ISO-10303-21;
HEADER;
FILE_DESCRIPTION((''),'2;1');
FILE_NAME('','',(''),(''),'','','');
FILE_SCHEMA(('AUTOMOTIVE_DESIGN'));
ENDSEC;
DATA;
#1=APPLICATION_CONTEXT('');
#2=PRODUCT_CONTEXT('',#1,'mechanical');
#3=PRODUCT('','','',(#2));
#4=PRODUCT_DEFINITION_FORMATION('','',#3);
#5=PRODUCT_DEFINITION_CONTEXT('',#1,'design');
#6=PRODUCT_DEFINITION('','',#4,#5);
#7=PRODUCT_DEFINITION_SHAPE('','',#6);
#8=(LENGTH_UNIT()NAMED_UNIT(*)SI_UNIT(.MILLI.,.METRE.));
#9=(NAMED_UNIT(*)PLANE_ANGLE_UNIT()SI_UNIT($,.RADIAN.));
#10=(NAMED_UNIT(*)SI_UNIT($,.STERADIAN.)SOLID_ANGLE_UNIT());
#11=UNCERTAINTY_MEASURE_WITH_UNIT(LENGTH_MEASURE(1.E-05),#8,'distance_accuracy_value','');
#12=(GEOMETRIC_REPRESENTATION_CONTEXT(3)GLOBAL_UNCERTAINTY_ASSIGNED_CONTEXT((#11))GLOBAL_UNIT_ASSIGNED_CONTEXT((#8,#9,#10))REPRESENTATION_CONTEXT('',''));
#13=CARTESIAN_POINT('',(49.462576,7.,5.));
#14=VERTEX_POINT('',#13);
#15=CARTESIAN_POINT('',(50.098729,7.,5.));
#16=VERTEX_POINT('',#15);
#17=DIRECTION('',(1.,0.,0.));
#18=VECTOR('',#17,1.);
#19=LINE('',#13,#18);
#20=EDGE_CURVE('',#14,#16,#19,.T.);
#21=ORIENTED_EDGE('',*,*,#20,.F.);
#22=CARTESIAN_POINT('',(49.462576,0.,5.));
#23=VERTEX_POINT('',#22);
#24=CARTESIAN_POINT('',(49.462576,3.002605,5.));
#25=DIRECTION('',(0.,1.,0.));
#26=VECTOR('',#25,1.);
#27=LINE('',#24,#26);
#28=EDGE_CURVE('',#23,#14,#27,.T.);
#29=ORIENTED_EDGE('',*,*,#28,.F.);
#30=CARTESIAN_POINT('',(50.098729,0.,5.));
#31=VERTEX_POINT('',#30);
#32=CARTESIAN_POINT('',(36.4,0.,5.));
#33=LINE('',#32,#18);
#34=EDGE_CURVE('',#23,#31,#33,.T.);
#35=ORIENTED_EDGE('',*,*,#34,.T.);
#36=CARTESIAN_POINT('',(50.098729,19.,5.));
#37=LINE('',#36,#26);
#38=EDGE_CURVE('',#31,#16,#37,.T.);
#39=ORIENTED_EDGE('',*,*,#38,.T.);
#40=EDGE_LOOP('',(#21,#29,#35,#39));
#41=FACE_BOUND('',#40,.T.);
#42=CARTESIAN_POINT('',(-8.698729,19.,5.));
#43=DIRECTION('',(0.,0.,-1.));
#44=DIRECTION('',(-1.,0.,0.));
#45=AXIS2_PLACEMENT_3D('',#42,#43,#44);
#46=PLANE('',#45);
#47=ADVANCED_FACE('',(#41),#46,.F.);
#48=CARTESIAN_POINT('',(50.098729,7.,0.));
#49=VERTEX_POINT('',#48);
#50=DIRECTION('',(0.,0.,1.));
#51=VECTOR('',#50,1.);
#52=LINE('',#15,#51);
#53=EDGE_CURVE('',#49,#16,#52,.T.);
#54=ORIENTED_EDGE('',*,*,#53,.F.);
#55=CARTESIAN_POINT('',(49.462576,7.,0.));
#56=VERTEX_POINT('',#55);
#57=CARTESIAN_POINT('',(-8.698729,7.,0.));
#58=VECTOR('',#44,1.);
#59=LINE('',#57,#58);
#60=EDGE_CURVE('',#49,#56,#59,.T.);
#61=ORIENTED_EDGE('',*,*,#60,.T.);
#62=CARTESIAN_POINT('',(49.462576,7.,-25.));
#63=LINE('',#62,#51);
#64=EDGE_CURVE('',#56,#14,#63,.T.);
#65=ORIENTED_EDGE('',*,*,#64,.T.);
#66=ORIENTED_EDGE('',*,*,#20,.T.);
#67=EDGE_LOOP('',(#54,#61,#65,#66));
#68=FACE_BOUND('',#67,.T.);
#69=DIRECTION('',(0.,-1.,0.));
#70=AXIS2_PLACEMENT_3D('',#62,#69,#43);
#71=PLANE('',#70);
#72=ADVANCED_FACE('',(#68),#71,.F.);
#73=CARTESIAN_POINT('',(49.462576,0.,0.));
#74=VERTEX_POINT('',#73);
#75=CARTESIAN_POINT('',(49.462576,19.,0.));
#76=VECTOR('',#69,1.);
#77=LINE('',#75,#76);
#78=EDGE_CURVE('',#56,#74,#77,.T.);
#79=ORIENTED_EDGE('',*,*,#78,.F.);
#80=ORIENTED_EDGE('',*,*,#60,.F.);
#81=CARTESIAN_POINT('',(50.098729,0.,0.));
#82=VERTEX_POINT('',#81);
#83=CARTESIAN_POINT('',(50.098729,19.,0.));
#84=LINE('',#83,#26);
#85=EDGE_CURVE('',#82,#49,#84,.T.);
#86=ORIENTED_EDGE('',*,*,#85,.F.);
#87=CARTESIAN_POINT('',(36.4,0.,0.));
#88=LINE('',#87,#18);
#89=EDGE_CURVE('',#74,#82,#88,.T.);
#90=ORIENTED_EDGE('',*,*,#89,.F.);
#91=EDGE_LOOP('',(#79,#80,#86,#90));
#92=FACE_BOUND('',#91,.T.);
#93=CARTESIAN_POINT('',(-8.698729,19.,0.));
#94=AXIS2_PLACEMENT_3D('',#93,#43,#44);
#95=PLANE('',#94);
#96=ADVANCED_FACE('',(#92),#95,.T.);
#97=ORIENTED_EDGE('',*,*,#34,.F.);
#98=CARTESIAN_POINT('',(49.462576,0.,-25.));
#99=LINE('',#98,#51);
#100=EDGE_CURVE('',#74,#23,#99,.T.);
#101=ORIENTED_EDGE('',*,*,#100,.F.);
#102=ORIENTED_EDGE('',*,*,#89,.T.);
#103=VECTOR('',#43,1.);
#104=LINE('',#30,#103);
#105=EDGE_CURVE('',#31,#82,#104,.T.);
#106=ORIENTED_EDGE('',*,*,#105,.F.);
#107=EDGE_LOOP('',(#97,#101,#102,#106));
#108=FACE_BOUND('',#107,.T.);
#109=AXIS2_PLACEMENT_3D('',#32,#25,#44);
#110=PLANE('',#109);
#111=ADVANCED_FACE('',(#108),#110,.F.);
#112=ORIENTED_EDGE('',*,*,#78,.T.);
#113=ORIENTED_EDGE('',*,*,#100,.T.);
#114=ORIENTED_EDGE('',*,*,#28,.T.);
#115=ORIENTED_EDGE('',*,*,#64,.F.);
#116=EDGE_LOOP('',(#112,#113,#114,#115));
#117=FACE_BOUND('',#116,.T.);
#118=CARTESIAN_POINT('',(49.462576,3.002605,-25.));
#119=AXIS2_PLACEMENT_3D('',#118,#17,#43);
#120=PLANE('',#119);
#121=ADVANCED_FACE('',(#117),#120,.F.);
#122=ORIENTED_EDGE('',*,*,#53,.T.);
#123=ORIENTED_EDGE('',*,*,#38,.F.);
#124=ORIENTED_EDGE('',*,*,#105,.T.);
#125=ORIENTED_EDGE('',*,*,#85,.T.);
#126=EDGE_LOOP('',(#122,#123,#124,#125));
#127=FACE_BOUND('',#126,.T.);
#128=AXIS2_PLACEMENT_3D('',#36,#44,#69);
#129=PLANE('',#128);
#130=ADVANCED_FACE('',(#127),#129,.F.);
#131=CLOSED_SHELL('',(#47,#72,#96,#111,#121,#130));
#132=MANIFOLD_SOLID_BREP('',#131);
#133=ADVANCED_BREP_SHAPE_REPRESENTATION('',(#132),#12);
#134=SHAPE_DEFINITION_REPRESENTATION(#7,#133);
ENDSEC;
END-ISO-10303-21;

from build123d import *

# Parameters (mm, degrees)
BOSS_EXTRU_1_DEPTH               = 5
ENL_V_MAT_EXTRU_2_DEPTH          = 30
R_P_TITION_START                 = -13.698729417
R_P_TITION_LIN_AIRE1_OUTLINE_W   = 17
R_P_TITION_LIN_AIRE1_OUTLINE_H   = 5
R_P_TITION_LIN_AIRE1_DEPTH       = 167.693647085
R_P_TITION_START_2               = 86.498729417
R_P_TITION_LIN_AIRE1_2_OUTLINE_W = 7
R_P_TITION_LIN_AIRE1_2_OUTLINE_H = 5
R_P_TITION_LIN_AIRE1_2_DEPTH     = 67.496188251
R_P_TITION_LIN_AIRE1_3_OUTLINE_W = 7
R_P_TITION_LIN_AIRE1_3_OUTLINE_H = 5
R_P_TITION_LIN_AIRE1_3_DEPTH     = 63.161305733


# Read off the part's stored shape, not the designer's step: Répétition linéaire1
with BuildPart() as part:
    # Esquisse1 → Boss.-Extru.1 (new body)
    with BuildSketch(Plane.XY):
        with BuildLine():
            Line((-13.698729417, 0), (0, 0))
            Line((0, 0), (0, 19))
            Line((0, 19), (36.4, 19))
            Line((36.4, 19), (36.4, 0))
            Line((36.4, 0), (50.098729417, 0))
            Line((50.098729417, 0), (50.098729417, 19))
            Line((50.098729417, 19), (86.498729417, 19))
            Line((86.498729417, 19), (86.498729417, 0))
            Line((86.498729417, 0), (103.896188251, 0))
            Line((103.896188251, 0), (103.896188251, 19))
            Line((103.896188251, 19), (140.296188251, 19))
            Line((140.296188251, 19), (140.296188251, 0))
            Line((140.296188251, 0), (153.994917668, 0))
            Line((153.994917668, 0), (153.994917668, 19))
            Line((153.994917668, 19), (153.994917668, 24))
            Line((153.994917668, 24), (-8.698729417, 24))
            ThreePointArc((-8.698729417, 24), (-12.234263323, 22.535533906), (-13.698729417, 19))
            Line((-13.698729417, 19), (-13.698729417, 0))
        make_face()
    extrude(amount=BOSS_EXTRU_1_DEPTH)

    # Esquisse3 → Enlèv. mat.-Extru.2 (cut)
    with BuildSketch(Plane.XY.offset(5)):
        Polygon((-3.537423684, 3.002605055), (-3.537423684, 7), (-2.537423684, 7), (-2.537423684, 9), (-3.537423684, 9), (-3.537423684, 18), (-6.537423684, 18), (-6.537423684, 9), (-7.537423684, 9), (-7.537423684, 7), (-6.537423684, 7), (-6.537423684, 3.002605055), (-6.537423684, 0), (-3.537423684, 0), align=None)
    extrude(amount=-ENL_V_MAT_EXTRU_2_DEPTH, mode=Mode.SUBTRACT)

    # Répétition linéaire1 outline → Répétition linéaire1 (cut)
    with BuildSketch(Plane.YZ.offset(R_P_TITION_START)):
        with Locations((15.5, 2.5)):
            Rectangle(R_P_TITION_LIN_AIRE1_OUTLINE_W, R_P_TITION_LIN_AIRE1_OUTLINE_H)
    extrude(amount=R_P_TITION_LIN_AIRE1_DEPTH, mode=Mode.SUBTRACT)

    # R_p_tition lin_aire1 2 outline → R_p_tition lin_aire1 2 (cut)
    with BuildSketch(Plane.YZ.offset(R_P_TITION_START_2)):
        with Locations((3.5, 2.5)):
            Rectangle(R_P_TITION_LIN_AIRE1_2_OUTLINE_W, R_P_TITION_LIN_AIRE1_2_OUTLINE_H)
    extrude(amount=R_P_TITION_LIN_AIRE1_2_DEPTH, mode=Mode.SUBTRACT)

    # R_p_tition lin_aire1 3 outline → R_p_tition lin_aire1 3 (cut)
    with BuildSketch(Plane.YZ.offset(R_P_TITION_START)):
        with Locations((3.5, 2.5)):
            Rectangle(R_P_TITION_LIN_AIRE1_3_OUTLINE_W, R_P_TITION_LIN_AIRE1_3_OUTLINE_H)
    extrude(amount=R_P_TITION_LIN_AIRE1_3_DEPTH, mode=Mode.SUBTRACT)


solid = part.part
